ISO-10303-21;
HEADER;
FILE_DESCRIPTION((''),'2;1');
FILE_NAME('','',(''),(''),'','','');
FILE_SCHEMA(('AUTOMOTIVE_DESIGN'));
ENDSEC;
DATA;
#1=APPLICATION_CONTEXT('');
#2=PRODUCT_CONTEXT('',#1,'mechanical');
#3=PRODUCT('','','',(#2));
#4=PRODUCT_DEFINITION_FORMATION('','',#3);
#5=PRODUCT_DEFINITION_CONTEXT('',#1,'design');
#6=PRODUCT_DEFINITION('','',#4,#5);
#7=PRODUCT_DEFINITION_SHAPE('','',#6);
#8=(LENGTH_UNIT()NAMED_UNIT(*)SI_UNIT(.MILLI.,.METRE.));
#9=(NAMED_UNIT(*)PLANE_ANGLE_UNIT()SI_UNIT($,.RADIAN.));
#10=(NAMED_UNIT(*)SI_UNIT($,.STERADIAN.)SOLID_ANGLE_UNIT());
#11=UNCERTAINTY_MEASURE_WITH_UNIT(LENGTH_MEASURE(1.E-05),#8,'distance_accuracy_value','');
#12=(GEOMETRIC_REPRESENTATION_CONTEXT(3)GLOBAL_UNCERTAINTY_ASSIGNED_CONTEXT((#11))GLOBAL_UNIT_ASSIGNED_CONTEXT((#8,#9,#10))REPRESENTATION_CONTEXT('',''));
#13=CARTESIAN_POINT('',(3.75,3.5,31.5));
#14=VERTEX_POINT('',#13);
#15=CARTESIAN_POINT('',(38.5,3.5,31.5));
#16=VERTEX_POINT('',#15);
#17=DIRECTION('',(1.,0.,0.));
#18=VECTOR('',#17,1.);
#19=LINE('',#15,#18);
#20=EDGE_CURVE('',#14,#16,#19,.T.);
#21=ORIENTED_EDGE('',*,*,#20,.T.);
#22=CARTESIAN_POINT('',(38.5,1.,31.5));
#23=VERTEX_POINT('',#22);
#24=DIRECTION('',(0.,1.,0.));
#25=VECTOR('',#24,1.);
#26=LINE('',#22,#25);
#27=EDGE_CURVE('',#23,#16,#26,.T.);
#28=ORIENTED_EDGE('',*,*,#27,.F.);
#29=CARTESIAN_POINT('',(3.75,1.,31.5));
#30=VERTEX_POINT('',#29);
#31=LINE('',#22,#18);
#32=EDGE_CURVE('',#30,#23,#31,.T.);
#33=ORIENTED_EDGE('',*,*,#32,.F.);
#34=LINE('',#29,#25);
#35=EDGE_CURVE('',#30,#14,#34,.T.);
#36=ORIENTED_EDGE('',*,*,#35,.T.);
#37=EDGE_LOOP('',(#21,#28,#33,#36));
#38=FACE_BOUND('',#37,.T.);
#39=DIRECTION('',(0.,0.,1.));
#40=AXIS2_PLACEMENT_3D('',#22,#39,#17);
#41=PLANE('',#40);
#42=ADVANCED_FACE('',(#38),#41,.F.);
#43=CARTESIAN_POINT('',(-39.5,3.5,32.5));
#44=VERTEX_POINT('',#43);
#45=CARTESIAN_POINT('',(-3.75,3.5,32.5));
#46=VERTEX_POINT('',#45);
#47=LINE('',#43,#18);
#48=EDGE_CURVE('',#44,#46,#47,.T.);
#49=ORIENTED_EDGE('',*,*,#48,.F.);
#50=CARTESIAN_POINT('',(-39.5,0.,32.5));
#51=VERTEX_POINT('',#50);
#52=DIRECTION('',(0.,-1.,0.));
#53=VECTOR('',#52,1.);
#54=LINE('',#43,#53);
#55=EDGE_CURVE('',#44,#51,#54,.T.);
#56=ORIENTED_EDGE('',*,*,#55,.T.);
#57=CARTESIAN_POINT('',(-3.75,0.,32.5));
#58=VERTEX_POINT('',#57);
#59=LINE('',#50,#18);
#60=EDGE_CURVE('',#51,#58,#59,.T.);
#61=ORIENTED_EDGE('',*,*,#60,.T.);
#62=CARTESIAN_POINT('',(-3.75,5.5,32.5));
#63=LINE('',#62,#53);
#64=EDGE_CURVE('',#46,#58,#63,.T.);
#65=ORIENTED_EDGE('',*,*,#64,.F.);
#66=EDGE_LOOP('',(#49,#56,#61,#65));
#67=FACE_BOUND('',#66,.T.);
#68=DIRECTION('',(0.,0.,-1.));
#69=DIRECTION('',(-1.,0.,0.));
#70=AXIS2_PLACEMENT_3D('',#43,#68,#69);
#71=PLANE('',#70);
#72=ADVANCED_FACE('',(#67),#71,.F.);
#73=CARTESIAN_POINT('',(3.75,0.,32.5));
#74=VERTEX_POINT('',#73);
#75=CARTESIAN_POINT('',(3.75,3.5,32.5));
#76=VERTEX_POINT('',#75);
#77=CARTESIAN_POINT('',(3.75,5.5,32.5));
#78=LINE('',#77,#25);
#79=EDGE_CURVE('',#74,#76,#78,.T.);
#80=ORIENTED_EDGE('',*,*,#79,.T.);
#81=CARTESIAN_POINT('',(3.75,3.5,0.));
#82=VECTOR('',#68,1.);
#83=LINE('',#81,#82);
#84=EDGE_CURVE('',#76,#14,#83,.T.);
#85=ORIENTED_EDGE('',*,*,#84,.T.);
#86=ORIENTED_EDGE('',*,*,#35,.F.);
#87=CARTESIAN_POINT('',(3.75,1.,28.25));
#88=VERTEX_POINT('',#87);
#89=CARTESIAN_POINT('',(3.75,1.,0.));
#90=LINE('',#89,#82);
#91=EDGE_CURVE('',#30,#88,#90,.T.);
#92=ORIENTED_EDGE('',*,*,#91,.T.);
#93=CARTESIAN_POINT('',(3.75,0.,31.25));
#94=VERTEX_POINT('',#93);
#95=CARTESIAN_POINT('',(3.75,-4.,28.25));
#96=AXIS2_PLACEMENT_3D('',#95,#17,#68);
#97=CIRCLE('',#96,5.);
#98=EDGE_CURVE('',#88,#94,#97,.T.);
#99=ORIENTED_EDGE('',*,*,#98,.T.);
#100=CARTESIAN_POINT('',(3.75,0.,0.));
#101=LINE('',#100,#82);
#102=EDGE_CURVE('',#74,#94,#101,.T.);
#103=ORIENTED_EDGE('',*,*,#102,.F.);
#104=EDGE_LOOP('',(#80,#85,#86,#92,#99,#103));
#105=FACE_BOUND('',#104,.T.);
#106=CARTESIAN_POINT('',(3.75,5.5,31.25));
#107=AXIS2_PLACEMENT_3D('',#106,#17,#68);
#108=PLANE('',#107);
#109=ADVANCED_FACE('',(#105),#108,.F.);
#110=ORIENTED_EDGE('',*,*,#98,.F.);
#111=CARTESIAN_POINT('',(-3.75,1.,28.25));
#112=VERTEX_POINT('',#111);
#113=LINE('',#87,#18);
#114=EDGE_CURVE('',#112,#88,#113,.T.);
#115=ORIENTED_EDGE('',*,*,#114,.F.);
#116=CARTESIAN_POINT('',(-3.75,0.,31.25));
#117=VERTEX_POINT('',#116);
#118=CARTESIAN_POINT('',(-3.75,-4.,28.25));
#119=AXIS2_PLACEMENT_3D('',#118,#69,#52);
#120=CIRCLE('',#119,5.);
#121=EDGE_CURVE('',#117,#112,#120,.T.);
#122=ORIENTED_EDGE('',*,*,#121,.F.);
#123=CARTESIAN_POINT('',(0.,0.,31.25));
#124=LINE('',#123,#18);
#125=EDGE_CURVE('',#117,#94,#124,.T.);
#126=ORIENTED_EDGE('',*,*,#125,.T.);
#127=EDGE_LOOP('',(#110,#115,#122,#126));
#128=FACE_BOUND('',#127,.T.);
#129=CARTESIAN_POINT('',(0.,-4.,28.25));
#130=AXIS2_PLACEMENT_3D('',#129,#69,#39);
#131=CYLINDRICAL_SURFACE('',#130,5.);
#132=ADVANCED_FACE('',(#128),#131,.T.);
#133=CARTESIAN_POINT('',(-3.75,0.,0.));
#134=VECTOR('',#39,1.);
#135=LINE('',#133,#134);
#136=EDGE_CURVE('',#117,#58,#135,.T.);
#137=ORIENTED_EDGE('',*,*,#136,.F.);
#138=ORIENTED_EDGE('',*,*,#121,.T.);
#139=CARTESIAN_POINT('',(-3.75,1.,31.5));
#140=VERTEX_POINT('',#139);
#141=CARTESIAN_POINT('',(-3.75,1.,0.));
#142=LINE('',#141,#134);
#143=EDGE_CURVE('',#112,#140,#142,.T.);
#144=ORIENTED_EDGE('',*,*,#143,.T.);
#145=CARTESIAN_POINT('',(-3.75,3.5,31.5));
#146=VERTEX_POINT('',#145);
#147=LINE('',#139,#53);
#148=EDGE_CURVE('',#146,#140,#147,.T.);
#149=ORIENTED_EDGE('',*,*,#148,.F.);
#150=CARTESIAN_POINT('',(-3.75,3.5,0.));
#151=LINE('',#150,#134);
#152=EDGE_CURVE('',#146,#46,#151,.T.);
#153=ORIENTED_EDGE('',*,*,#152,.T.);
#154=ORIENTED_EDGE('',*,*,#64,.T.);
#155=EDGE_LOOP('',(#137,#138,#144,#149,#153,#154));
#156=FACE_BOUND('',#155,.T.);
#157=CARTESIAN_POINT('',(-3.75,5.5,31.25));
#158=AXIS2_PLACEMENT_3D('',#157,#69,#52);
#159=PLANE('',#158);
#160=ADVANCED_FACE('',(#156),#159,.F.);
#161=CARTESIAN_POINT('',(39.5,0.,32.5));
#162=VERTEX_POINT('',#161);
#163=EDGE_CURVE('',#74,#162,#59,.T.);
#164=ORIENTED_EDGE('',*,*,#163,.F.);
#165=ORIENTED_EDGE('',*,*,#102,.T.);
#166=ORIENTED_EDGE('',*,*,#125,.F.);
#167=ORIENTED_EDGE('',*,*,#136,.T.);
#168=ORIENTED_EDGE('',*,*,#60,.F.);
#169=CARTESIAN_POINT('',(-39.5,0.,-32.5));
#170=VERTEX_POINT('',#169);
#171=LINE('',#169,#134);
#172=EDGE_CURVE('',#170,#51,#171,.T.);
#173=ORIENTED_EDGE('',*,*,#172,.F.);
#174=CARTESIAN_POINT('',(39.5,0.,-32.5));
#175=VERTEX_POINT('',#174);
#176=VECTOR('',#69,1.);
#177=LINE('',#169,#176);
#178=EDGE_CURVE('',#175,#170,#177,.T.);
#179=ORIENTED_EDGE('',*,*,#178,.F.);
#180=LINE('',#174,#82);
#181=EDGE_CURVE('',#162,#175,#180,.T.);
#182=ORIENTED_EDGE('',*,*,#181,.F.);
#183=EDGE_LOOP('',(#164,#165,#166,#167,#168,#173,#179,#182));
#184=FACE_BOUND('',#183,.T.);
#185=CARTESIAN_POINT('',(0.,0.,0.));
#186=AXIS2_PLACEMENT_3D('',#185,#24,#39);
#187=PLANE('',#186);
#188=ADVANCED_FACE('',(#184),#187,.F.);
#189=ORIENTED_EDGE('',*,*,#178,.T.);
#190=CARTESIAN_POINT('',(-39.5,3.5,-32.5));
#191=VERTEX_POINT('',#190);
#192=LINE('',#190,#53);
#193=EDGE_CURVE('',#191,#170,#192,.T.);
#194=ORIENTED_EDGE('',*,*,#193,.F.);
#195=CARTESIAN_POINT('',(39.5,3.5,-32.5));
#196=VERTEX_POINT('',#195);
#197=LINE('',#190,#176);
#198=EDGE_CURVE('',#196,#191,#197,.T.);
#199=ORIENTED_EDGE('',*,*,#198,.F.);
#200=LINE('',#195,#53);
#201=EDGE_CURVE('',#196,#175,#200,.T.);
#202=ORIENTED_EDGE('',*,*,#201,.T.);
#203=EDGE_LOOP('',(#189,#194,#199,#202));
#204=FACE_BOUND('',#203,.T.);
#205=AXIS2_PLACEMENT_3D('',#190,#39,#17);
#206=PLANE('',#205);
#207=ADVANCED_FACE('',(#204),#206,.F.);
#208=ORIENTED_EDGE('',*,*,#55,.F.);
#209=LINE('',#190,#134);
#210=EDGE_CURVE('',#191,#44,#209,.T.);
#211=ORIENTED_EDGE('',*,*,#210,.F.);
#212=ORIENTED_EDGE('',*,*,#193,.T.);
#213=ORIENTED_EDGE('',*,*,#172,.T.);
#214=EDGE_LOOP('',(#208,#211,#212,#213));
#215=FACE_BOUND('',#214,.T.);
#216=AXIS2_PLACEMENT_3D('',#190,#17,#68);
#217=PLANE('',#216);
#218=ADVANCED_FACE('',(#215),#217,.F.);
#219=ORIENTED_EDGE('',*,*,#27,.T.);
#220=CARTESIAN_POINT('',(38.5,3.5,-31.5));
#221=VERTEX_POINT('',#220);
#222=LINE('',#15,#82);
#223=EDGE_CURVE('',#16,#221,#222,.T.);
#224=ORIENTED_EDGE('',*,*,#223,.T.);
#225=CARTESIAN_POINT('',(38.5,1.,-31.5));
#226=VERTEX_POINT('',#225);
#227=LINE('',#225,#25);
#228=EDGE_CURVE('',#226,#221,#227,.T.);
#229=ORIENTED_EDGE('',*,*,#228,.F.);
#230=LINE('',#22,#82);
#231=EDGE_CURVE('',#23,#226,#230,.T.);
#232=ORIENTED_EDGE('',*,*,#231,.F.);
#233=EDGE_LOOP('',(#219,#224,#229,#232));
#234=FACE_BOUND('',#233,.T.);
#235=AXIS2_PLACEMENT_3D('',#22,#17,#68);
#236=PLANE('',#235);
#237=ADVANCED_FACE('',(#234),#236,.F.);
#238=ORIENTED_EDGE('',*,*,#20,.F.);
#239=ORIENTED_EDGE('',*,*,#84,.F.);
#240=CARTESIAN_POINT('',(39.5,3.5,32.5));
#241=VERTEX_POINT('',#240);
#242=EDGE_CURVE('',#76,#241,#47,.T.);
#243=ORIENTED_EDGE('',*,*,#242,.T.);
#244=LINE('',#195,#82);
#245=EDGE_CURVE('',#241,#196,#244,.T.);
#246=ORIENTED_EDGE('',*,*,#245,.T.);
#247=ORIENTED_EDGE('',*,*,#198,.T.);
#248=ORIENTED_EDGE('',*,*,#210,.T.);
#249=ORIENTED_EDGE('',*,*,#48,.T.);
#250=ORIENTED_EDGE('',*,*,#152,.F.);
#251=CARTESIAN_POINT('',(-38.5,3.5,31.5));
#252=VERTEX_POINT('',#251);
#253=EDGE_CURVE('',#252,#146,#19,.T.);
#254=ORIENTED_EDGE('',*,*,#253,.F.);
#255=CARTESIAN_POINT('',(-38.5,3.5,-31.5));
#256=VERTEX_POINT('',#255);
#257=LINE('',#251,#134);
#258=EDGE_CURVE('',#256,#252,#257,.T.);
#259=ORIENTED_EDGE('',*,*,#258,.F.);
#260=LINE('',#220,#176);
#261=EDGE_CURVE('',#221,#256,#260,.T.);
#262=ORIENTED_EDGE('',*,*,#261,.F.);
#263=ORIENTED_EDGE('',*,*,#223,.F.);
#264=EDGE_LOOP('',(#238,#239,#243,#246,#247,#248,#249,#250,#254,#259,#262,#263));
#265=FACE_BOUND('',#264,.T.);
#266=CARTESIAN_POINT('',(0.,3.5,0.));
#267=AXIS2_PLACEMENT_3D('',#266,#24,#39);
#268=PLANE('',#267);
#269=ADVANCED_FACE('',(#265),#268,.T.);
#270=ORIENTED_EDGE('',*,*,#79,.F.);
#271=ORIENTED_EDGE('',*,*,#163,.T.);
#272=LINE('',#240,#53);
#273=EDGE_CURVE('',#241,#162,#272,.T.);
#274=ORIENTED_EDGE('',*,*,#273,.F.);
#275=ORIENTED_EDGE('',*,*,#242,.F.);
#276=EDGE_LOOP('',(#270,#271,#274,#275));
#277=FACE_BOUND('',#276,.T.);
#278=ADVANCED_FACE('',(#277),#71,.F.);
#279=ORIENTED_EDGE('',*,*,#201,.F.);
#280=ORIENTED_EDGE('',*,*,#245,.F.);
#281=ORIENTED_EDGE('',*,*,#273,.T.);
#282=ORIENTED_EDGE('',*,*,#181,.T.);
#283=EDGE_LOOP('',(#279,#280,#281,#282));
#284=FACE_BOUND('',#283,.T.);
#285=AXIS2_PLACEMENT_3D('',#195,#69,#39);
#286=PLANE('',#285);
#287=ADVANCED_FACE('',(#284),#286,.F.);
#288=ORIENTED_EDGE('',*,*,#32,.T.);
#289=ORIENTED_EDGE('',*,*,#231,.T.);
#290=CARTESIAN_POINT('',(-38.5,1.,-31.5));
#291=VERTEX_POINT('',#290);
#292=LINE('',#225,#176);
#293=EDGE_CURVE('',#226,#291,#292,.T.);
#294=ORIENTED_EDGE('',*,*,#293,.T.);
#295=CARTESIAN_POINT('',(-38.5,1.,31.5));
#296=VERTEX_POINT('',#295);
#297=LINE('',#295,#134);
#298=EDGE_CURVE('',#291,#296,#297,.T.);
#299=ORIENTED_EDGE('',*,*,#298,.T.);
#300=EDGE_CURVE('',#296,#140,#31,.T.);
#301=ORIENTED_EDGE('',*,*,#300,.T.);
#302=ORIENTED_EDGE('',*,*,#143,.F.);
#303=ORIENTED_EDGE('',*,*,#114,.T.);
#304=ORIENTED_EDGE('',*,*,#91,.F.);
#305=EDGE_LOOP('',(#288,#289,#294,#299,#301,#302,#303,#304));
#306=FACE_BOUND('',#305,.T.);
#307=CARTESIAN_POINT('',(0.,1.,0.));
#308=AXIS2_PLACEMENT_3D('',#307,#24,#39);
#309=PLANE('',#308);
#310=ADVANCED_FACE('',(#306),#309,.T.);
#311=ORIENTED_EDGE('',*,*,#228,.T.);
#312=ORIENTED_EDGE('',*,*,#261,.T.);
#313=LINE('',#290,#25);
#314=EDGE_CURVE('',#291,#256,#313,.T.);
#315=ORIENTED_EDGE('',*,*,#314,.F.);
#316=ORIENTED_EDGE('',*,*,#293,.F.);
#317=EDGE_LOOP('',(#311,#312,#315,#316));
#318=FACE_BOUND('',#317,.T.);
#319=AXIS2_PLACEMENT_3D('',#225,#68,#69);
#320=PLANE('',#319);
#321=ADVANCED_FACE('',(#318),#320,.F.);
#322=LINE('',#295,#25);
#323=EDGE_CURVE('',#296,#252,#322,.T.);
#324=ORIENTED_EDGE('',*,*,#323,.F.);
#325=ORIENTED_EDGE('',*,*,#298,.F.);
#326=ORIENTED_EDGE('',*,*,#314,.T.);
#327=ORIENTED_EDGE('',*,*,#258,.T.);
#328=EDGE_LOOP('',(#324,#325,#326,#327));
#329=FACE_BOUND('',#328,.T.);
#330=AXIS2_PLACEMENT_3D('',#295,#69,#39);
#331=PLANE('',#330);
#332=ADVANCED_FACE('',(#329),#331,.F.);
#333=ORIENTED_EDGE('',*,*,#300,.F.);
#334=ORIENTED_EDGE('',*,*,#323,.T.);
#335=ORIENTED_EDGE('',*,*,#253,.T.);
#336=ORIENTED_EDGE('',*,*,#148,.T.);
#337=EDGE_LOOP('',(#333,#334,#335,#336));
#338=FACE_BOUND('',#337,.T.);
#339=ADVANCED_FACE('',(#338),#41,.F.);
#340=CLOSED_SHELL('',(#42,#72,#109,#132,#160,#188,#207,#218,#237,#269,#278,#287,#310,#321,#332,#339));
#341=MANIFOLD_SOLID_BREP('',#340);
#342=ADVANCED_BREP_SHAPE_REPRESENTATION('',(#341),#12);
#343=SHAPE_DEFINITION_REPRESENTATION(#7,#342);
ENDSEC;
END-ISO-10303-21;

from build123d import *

# Parameters (mm, degrees)
ESQUISSE1_W             = 79
ESQUISSE1_H             = 65
BOSS_EXTRU_1_DEPTH      = 3.5
ESQUISSE2_W             = 77
ESQUISSE2_H             = 63
ENL_V_MAT_EXTRU_1_DEPTH = 2.5
ESQUISSE3_W             = 7.5
ESQUISSE3_H             = 7.5
ENL_V_MAT_EXTRU_2_DEPTH = 1.25
CONG_1_R                = 5


with BuildPart() as part:
    # Esquisse1 → Boss.-Extru.1 (new body)
    with BuildSketch(Plane(origin=(0, 0, 0), x_dir=(1, 0, 0), z_dir=(0, 1, 0))):
        Rectangle(ESQUISSE1_W, ESQUISSE1_H)
    extrude(amount=BOSS_EXTRU_1_DEPTH)

    # Esquisse2 → Enlèv. mat.-Extru.1 (cut)
    with BuildSketch(Plane(origin=(0, 3.5, 0), x_dir=(1, 0, 0), z_dir=(0, 1, 0))):
        Rectangle(ESQUISSE2_W, ESQUISSE2_H)
    extrude(amount=-ENL_V_MAT_EXTRU_1_DEPTH, mode=Mode.SUBTRACT)

    # Esquisse3 → Enlèv. mat.-Extru.2 (cut)
    with BuildSketch(Plane.XY.offset(32.5)):
        with Locations((0, 1.75)):
            Rectangle(ESQUISSE3_W, ESQUISSE3_H)
    extrude(amount=-ENL_V_MAT_EXTRU_2_DEPTH, mode=Mode.SUBTRACT)

    # Congé1
    # the kernel refuses this fillet: 5 mm, written as the material it takes off along each edge
    with BuildSketch(Plane(origin=(-3.75, 1, 31.25), x_dir=(0, -1, 0), z_dir=(1, 0, 0))) as cong_1_piece_1:
        with BuildLine():
            CenterArc((5, 3), CONG_1_R, 180, 36.869897646)
            Line((0, 3), (-0.1, 3))
            Line((-0.1, 3), (-0.1, 0))
            Line((-0.1, 0), (0, -0.1))
            ThreePointArc((0, -0.1), (0.5, -0.1), (0.92, -0.06))
            Line((0.92, -0.06), (1, 0))
        make_face()
    extrude(amount=7.5, mode=Mode.SUBTRACT)


solid = part.part
